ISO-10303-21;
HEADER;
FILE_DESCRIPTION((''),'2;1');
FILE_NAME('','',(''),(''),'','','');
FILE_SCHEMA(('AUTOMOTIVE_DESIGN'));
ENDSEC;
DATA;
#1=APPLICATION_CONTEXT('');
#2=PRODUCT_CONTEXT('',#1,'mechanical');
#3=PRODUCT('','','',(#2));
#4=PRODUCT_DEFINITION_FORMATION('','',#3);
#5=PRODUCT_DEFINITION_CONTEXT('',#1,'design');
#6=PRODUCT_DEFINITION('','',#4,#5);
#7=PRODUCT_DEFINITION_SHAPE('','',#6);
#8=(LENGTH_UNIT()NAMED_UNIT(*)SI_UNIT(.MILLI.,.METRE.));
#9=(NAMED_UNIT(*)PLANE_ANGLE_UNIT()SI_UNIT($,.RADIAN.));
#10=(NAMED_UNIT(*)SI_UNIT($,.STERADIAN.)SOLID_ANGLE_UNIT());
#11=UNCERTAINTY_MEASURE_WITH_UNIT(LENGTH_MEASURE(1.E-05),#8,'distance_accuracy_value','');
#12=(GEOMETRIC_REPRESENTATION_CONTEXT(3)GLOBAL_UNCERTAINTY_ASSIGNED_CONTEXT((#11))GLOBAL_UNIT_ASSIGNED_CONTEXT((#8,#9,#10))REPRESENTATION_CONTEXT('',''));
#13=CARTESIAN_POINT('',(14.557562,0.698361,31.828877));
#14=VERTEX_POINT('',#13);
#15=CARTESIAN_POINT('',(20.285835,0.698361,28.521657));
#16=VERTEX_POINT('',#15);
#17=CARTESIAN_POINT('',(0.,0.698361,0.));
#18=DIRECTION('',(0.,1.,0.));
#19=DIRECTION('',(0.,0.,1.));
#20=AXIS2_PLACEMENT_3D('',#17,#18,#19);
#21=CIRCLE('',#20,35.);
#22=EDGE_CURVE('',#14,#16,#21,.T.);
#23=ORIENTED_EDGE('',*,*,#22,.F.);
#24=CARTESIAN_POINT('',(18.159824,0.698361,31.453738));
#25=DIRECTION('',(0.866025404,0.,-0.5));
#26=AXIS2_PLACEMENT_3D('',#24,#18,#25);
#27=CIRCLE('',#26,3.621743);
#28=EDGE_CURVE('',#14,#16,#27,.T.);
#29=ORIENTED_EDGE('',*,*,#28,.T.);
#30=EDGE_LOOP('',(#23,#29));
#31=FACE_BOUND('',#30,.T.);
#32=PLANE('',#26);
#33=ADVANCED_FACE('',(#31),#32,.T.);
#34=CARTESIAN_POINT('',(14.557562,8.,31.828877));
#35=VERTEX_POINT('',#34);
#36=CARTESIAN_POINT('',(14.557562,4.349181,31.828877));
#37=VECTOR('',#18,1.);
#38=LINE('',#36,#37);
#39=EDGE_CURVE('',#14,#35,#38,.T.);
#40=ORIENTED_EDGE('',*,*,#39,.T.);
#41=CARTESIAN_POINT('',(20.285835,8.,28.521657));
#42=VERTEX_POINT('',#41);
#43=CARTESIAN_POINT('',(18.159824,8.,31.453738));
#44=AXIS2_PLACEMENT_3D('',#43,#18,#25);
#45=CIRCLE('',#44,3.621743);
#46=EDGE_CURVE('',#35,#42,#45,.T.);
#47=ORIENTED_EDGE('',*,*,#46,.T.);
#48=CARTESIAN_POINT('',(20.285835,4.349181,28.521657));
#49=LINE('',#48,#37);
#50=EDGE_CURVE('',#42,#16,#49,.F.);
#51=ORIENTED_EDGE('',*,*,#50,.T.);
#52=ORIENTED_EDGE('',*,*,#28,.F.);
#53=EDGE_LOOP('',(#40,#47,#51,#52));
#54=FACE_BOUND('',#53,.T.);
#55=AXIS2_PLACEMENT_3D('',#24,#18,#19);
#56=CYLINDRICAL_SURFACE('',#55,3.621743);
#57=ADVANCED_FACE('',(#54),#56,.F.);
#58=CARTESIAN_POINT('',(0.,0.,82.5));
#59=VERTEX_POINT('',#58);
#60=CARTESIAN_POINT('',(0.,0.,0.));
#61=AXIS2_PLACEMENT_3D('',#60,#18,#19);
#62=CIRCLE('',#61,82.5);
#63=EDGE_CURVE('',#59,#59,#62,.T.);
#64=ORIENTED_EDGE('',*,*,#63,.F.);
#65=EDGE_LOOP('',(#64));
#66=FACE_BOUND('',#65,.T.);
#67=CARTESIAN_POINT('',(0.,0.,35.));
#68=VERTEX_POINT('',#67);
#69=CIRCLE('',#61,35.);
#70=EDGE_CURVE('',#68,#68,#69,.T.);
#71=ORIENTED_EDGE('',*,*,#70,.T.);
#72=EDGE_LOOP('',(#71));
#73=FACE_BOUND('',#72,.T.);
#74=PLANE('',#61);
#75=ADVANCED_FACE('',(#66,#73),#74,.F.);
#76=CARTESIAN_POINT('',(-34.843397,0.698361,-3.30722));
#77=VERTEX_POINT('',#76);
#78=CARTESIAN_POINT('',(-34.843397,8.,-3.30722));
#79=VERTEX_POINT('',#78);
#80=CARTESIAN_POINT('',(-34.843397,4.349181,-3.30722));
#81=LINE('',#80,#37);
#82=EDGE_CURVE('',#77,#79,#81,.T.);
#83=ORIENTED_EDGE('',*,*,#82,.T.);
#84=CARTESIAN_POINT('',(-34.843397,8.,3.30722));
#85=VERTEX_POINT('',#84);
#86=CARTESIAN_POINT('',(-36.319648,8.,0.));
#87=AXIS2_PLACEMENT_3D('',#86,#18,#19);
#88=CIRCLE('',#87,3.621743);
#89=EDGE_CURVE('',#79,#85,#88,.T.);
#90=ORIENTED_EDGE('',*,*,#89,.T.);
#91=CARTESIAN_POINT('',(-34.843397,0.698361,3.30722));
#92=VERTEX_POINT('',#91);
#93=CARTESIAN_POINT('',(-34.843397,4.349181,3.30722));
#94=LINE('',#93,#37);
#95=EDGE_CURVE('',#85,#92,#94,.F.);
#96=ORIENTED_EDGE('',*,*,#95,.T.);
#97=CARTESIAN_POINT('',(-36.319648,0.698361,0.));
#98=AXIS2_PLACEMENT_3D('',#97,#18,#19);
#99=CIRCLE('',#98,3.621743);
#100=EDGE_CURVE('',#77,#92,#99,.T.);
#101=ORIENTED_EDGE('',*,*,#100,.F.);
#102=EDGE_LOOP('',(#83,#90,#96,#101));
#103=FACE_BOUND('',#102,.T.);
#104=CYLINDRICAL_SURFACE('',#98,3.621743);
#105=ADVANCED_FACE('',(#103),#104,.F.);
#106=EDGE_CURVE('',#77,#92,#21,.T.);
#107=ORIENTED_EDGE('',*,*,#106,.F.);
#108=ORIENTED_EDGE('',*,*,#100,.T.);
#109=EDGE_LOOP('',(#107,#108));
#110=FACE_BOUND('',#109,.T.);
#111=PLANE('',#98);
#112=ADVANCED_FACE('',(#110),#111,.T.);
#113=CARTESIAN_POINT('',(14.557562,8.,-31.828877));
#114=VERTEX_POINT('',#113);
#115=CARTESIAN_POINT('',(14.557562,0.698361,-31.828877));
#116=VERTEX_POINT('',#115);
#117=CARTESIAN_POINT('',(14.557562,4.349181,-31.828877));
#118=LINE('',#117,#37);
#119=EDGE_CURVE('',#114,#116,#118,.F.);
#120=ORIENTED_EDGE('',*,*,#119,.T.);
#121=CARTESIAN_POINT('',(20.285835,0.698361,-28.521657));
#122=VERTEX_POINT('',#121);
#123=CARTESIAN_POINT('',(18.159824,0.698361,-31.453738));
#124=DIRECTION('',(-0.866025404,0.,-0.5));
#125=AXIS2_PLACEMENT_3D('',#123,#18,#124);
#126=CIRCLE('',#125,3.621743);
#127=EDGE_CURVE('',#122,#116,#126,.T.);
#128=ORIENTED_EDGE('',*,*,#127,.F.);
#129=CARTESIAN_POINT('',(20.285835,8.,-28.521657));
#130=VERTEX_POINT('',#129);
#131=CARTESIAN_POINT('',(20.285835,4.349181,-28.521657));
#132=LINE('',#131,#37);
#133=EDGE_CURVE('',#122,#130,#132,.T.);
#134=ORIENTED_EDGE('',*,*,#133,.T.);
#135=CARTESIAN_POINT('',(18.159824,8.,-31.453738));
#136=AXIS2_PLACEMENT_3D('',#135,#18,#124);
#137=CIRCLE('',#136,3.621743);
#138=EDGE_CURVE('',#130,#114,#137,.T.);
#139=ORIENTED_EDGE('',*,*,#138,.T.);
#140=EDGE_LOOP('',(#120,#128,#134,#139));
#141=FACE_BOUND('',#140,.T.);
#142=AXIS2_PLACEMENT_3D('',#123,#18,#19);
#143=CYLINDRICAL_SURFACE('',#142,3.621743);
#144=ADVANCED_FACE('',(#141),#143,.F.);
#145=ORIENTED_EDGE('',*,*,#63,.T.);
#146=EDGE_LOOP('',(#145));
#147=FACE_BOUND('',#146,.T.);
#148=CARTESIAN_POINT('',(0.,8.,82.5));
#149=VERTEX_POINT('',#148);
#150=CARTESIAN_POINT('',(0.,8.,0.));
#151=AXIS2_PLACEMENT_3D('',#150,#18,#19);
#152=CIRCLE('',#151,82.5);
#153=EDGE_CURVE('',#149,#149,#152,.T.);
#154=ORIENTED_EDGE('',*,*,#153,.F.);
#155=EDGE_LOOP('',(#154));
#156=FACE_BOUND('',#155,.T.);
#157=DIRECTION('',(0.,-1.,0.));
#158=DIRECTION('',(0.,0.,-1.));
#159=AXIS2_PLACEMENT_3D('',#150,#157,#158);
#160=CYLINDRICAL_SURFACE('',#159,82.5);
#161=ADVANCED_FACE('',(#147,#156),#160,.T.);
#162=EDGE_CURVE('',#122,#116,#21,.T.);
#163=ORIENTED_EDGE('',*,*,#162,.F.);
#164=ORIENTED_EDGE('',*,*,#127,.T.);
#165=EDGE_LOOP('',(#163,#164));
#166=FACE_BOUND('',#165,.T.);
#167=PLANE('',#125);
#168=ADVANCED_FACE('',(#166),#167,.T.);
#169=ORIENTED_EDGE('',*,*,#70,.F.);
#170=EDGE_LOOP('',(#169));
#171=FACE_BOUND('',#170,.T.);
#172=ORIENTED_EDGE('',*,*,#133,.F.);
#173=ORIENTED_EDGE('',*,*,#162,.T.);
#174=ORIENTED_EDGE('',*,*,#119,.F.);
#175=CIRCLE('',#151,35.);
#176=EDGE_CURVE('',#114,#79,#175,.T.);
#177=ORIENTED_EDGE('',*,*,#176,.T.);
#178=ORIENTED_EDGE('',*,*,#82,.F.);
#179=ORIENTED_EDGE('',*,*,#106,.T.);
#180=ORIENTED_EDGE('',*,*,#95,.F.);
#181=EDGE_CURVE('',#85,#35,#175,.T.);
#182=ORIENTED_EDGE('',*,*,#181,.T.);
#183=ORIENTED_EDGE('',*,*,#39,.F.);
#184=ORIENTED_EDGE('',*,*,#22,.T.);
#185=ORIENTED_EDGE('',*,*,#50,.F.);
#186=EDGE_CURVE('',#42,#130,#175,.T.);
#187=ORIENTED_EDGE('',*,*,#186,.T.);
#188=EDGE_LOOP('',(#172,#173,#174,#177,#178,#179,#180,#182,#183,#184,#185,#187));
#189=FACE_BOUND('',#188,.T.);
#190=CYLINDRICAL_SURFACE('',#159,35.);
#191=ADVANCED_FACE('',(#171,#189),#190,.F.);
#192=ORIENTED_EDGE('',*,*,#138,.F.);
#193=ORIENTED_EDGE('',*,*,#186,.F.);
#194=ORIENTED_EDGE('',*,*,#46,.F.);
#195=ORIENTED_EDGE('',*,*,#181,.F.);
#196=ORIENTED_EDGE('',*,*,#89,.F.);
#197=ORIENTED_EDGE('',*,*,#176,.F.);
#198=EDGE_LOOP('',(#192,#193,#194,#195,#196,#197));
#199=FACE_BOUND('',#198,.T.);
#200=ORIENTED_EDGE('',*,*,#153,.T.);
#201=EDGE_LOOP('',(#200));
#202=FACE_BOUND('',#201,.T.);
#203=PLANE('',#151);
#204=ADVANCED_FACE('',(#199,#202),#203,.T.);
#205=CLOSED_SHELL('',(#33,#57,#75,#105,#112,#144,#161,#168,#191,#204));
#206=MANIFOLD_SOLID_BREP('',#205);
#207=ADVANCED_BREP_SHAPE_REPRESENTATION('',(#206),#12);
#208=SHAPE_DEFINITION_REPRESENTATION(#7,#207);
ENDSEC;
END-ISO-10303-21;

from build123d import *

# Parameters (mm, degrees)
SKETCH1_R           = 82.5
BOSS_EXTRUDE1_DEPTH = 8
SKETCH2_R           = 35
CUT_EXTRUDE1_DEPTH  = 117.946568996
SKETCH3_R           = 3.621742951
CUT_EXTRUDE2_DEPTH  = 7.301638906
CIRPATTERN1_COUNT   = 3


with BuildPart() as part:
    # Sketch1 → Boss-Extrude1 (new body)
    with BuildSketch(Plane(origin=(0, 0, 0), x_dir=(1, 0, 0), z_dir=(0, 1, 0))):
        Circle(SKETCH1_R)
    extrude(amount=BOSS_EXTRUDE1_DEPTH)

    # Sketch2 → Cut-Extrude1 (cut, through all)
    with BuildSketch(Plane(origin=(0, 0, 0), x_dir=(1, 0, 0), z_dir=(0, 1, 0))):
        Circle(SKETCH2_R)
    extrude(amount=CUT_EXTRUDE1_DEPTH, mode=Mode.SUBTRACT)

    # Sketch3 → Cut-Extrude2 (cut)
    with BuildSketch(Plane(origin=(0, 8, 0), x_dir=(1, 0, 0), z_dir=(0, 1, 0))):
        with Locations((-36.31964846, 0)):
            Circle(SKETCH3_R)
    cut_extrude2 = extrude(amount=-CUT_EXTRUDE2_DEPTH, mode=Mode.SUBTRACT)

    # CirPattern1: Cut-Extrude2 ×3 about axis
    cirpattern1_axis = Axis((0, 0, 0), (0, 1, 0))
    for i in range(1, CIRPATTERN1_COUNT):
        add(cut_extrude2.rotate(cirpattern1_axis, i * 360 / CIRPATTERN1_COUNT), mode=Mode.SUBTRACT)


solid = part.part
